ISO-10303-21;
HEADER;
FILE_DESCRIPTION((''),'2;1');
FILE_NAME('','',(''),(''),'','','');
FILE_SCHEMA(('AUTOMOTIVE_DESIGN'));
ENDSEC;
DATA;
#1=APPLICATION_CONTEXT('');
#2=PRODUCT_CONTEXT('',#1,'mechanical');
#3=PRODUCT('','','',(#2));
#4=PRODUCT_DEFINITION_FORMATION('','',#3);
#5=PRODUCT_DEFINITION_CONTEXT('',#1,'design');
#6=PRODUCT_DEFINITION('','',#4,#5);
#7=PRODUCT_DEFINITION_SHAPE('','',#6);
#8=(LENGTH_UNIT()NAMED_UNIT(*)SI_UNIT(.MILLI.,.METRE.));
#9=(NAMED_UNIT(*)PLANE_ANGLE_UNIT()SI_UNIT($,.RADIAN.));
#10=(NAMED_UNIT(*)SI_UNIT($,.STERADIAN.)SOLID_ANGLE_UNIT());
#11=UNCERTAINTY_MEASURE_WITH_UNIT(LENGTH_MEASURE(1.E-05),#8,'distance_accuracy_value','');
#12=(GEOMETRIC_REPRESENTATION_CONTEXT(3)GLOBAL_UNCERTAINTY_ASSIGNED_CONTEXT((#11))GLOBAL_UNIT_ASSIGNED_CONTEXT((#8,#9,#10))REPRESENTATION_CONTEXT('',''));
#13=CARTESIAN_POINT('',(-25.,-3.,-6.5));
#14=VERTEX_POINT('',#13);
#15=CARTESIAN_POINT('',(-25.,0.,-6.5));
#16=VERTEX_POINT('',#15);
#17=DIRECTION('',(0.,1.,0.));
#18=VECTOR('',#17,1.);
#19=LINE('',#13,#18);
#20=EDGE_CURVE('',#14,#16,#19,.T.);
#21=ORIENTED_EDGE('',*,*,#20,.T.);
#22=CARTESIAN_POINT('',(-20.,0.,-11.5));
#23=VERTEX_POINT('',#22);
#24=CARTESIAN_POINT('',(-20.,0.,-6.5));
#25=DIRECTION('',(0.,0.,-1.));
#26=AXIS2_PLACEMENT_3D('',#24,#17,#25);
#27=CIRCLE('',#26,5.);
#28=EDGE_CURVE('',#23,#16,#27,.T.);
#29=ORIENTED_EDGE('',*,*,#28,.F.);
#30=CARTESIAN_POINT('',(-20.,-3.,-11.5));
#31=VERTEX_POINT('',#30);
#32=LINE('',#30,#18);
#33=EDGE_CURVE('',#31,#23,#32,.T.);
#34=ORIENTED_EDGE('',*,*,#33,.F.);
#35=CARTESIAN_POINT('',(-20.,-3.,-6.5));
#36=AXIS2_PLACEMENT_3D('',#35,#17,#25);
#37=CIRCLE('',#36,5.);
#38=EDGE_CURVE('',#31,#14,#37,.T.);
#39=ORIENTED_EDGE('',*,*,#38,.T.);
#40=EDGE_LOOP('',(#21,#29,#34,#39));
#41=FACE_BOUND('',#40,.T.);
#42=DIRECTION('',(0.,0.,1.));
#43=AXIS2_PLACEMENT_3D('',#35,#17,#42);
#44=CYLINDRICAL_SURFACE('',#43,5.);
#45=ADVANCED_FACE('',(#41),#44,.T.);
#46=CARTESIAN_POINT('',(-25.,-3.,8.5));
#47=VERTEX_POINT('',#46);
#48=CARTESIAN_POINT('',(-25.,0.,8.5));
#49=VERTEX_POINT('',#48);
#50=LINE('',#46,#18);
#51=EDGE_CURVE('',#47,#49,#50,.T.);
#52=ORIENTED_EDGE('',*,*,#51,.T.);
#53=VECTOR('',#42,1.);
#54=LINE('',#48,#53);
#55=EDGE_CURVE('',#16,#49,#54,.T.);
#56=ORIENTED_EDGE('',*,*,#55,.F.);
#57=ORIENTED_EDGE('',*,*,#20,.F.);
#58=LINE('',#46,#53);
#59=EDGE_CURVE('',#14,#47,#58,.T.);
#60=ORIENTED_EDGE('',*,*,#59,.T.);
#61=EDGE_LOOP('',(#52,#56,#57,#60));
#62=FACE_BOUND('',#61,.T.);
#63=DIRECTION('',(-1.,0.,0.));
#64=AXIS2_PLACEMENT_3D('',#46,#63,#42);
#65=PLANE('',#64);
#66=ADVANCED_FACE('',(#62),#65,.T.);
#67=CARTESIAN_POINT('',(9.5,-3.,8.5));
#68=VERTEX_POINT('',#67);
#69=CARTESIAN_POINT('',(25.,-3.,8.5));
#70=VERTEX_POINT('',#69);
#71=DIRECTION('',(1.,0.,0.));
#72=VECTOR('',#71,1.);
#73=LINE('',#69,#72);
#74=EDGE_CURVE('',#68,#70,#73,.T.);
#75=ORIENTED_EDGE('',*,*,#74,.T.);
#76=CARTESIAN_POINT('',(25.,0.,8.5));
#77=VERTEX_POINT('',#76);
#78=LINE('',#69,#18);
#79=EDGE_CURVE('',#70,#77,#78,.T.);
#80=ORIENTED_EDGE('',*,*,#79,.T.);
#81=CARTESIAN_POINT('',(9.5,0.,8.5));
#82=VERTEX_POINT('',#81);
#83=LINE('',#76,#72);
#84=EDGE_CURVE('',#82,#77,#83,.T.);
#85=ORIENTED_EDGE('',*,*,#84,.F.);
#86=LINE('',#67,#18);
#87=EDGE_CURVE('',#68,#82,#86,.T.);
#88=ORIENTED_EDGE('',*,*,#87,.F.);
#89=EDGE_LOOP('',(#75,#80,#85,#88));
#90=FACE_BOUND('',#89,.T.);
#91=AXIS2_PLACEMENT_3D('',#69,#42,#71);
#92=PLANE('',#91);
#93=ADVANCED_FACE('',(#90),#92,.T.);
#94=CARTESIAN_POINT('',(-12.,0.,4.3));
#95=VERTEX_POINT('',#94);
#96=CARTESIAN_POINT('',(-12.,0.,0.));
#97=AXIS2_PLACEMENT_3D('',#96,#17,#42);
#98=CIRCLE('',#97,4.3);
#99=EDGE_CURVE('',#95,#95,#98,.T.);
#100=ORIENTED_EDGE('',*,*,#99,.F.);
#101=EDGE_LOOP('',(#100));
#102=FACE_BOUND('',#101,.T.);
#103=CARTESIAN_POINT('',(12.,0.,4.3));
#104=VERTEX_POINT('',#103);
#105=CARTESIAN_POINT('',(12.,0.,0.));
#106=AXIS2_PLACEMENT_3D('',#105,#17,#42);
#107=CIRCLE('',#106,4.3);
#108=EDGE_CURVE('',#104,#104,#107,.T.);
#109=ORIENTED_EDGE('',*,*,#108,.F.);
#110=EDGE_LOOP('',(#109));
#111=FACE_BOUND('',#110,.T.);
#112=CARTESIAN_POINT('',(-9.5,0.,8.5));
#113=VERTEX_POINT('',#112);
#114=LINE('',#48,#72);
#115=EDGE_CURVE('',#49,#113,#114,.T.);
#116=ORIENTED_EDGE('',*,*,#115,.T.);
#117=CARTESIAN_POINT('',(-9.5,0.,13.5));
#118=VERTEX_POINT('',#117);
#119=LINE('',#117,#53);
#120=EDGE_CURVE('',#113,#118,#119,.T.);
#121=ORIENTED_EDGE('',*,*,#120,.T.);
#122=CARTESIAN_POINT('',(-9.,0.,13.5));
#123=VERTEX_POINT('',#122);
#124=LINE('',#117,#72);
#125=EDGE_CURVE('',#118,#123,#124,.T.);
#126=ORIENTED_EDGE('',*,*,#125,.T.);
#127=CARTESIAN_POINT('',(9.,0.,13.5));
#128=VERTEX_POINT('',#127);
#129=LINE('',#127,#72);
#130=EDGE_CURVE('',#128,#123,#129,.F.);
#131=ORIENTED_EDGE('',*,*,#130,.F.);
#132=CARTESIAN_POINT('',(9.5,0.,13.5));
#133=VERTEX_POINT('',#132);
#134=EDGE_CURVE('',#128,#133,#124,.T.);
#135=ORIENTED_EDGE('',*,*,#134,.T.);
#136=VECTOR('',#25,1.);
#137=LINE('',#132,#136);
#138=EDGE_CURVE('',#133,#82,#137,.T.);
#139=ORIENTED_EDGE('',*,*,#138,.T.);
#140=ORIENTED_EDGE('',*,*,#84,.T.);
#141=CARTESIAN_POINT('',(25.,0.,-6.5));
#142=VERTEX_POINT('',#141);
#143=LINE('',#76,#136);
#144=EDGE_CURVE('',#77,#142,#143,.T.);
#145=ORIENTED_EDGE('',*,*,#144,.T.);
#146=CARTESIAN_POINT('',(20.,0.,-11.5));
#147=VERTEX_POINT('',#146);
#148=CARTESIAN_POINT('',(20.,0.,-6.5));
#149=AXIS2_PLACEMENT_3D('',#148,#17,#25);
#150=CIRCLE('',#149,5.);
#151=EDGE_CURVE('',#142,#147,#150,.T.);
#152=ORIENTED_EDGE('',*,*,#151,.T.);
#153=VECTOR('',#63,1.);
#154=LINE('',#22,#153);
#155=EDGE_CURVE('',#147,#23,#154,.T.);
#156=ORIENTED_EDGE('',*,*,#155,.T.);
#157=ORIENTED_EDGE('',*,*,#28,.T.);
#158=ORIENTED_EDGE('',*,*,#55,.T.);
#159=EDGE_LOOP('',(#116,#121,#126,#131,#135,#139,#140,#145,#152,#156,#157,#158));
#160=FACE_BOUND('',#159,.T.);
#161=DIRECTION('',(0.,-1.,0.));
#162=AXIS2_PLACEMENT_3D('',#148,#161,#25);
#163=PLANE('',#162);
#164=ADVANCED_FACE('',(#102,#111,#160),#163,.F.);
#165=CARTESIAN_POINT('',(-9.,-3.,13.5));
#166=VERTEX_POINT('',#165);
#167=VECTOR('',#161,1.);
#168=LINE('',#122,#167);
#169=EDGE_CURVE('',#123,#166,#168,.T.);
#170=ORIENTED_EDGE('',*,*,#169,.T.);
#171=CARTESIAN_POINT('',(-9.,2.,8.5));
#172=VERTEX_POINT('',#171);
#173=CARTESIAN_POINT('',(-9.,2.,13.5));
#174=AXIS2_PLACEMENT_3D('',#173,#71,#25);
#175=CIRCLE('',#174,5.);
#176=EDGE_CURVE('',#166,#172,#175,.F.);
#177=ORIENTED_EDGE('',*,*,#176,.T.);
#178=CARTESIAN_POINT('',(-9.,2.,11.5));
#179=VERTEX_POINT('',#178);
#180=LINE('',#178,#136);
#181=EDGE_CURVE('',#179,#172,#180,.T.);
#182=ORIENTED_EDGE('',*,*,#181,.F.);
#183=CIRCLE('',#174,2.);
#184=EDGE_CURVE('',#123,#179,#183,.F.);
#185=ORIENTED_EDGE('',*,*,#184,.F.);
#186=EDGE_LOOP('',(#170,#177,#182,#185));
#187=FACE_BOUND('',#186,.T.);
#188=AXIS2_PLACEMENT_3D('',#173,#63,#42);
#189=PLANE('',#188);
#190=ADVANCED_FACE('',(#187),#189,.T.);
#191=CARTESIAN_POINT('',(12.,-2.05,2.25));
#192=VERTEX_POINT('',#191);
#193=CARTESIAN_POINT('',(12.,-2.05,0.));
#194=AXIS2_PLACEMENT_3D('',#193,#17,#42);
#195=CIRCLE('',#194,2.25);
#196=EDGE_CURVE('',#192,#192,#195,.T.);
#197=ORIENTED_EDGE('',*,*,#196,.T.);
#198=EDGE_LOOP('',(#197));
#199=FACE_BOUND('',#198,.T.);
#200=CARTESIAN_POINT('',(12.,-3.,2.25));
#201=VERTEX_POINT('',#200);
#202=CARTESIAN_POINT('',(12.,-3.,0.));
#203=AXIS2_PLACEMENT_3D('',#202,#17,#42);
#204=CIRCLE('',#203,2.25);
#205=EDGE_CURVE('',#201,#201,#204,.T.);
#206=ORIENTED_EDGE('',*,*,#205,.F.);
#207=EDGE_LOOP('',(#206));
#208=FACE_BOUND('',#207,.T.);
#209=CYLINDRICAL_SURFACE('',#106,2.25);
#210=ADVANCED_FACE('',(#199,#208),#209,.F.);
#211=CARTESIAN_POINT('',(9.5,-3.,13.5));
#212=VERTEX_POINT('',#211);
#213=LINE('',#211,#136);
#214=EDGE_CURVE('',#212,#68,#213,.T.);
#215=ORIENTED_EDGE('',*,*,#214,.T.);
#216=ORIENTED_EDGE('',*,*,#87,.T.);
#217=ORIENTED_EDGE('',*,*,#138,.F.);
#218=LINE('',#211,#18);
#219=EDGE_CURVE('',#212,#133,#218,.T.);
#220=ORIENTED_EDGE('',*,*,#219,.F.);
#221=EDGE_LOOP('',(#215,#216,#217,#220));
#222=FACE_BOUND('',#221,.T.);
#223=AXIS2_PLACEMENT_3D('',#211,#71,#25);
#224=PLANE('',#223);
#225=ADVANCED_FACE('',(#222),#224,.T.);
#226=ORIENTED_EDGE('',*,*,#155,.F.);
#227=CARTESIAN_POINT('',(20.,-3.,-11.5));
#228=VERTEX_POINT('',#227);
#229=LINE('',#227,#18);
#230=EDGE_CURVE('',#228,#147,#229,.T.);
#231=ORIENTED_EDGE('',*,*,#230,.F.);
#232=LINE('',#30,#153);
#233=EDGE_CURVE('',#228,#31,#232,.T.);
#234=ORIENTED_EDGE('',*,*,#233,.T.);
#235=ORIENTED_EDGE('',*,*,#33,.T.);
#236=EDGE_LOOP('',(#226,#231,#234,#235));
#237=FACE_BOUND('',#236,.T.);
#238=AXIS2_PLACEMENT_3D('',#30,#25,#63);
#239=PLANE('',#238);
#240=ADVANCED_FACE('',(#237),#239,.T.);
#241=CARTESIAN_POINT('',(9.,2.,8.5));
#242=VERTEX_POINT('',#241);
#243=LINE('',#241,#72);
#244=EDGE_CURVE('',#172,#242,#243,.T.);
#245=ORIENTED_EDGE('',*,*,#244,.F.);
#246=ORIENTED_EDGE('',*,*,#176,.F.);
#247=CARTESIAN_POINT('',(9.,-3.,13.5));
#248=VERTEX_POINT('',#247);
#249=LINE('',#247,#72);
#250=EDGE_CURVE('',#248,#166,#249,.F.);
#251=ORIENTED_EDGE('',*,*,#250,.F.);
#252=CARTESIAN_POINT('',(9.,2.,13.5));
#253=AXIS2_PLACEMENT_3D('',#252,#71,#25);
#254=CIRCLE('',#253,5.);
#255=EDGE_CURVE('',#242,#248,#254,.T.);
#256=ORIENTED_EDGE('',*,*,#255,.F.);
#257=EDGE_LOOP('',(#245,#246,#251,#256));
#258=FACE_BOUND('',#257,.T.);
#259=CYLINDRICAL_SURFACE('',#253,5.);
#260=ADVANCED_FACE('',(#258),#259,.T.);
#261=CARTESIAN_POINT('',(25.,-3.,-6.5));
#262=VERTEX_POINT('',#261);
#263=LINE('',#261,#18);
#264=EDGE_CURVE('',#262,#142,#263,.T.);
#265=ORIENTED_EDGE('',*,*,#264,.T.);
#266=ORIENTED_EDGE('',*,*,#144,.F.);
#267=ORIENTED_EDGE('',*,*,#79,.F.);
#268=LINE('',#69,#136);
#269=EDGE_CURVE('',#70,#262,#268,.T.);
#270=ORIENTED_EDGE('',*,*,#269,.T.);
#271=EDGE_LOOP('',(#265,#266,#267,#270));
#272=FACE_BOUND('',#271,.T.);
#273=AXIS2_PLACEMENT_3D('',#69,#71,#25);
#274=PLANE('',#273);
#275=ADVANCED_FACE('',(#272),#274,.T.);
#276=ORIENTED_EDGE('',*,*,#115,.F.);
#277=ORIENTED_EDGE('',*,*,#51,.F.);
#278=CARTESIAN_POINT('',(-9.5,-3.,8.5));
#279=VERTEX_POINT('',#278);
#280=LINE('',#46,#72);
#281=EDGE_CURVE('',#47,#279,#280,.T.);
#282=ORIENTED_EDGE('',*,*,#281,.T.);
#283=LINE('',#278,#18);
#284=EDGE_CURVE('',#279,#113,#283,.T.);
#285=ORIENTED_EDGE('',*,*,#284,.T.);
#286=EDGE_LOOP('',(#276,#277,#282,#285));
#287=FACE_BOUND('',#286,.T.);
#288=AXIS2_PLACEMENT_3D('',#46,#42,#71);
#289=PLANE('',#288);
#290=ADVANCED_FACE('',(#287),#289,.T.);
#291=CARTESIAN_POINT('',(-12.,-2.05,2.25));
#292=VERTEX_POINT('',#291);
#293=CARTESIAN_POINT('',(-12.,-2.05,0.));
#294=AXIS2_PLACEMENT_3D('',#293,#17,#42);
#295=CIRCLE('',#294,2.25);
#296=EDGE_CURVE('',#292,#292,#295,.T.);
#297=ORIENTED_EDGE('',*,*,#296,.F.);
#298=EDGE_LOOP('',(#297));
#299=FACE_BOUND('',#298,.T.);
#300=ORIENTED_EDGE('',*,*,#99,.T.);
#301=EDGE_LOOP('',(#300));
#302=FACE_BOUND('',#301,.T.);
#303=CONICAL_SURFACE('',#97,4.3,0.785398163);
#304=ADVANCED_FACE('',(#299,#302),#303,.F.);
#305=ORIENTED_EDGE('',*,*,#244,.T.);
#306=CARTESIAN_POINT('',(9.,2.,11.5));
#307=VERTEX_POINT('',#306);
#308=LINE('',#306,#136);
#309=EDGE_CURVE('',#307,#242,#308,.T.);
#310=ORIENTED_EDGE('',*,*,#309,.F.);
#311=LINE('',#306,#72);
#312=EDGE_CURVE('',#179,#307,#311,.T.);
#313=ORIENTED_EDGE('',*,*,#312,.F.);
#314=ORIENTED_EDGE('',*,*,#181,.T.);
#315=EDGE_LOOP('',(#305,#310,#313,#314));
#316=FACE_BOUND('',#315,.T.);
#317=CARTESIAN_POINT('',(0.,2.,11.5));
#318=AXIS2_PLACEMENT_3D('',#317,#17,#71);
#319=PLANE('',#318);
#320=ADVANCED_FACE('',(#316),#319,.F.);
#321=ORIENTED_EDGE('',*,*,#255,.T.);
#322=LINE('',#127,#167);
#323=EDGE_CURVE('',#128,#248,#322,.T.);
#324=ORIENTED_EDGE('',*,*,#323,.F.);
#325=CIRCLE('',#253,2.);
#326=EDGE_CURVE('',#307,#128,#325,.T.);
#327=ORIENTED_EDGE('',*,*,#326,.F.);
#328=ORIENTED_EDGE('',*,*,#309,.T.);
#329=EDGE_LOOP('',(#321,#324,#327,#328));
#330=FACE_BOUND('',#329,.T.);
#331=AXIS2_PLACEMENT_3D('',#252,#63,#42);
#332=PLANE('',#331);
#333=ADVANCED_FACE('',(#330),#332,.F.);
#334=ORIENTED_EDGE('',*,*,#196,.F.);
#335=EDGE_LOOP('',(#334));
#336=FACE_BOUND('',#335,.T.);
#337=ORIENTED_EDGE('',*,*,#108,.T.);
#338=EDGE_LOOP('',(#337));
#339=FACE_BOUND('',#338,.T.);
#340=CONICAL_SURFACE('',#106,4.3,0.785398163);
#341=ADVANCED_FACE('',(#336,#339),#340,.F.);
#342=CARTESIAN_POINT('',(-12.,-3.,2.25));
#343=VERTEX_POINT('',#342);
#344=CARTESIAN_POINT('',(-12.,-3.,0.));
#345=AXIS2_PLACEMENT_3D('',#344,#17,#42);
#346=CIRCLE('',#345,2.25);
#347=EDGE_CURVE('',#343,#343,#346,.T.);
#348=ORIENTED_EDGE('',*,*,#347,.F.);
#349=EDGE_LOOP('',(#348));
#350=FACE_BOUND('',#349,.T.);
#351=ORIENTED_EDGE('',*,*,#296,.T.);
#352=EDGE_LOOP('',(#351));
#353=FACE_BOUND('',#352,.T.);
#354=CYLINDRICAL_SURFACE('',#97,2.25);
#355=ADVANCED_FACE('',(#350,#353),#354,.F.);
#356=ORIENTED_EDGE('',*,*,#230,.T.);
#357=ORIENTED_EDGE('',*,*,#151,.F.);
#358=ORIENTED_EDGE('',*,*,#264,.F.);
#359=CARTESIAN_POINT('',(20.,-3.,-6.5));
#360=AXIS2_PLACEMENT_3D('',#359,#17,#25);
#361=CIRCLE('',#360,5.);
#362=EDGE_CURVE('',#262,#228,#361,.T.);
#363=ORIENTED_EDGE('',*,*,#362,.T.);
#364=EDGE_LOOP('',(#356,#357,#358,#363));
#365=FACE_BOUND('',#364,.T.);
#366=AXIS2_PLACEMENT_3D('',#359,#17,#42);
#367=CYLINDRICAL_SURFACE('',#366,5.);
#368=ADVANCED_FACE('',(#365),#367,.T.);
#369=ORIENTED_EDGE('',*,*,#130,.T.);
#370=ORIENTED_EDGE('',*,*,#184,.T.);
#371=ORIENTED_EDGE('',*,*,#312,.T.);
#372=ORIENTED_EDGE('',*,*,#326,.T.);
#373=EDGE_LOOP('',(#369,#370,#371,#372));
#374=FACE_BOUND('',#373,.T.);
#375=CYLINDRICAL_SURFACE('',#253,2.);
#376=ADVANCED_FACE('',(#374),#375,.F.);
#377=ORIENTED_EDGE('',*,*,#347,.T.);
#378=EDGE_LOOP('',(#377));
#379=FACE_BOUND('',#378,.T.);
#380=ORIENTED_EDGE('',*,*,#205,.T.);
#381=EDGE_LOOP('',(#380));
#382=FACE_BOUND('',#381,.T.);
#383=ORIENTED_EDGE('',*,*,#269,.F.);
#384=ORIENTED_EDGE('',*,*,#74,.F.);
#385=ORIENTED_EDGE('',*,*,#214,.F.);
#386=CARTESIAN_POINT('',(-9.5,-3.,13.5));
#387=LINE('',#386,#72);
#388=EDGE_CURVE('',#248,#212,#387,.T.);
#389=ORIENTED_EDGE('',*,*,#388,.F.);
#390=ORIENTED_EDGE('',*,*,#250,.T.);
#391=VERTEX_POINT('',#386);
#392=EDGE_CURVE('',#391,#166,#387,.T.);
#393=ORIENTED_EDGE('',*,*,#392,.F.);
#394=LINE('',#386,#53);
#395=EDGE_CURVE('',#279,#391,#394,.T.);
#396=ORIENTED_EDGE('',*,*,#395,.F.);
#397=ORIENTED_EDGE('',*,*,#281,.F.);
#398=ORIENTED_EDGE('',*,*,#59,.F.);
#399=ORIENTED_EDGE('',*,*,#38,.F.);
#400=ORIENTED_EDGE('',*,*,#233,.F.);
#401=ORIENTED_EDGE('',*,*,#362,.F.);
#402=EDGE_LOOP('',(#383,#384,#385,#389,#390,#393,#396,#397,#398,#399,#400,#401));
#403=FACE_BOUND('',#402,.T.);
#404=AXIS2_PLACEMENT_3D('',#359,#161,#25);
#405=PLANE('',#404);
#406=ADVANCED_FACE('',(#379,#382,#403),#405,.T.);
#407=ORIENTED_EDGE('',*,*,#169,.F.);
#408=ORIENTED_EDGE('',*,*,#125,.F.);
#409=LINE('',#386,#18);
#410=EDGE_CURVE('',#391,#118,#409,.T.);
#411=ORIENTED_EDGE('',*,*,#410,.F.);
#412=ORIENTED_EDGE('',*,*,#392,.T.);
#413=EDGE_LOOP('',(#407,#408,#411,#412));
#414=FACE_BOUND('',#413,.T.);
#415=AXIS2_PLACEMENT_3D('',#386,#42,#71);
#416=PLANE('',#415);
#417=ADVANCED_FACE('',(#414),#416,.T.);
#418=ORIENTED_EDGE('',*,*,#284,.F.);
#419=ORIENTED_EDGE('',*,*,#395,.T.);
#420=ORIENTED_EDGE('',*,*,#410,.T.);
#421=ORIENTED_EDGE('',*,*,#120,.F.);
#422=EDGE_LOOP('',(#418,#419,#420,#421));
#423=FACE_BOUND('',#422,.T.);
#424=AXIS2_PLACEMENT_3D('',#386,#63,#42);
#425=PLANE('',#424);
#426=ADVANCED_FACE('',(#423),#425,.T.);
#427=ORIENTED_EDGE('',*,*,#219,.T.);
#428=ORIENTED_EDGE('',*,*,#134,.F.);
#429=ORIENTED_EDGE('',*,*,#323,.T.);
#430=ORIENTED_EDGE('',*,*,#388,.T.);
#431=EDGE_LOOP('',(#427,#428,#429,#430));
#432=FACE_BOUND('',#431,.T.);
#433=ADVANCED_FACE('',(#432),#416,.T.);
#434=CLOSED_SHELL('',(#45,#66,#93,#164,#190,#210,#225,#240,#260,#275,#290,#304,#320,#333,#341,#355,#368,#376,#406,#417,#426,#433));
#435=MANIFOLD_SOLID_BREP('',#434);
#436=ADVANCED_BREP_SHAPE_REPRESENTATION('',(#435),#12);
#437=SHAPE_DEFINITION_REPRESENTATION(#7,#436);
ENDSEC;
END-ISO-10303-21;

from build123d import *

# Parameters (mm, degrees)
SM_BASE_FLANGE_1_DEPTH   = 3
OTHER_START              = -9
OTHER_1_DEPTH            = 18
HOLE_WIZARD_2_AT_2_COUNT = 2
HOLE_WIZARD_2_AT_2_PITCH = 24


# Read off the part's stored shape, not the designer's step: 褶边1
# Sheet-metal steps are written as plain solids
with BuildPart() as part:
    # Sketch 1 → 基体-法兰1 (new body)
    with BuildSketch(Plane(origin=(0, 0, 0), x_dir=(1, 0, 0), z_dir=(0, 1, 0))):
        with BuildLine():
            Line((-9.5, -13.5), (9.5, -13.5))
            Line((9.5, -13.5), (9.5, -8.5))
            Line((9.5, -8.5), (25, -8.5))
            Line((25, -8.5), (25, 6.5))
            ThreePointArc((25, 6.5), (23.535533906, 10.035533906), (20, 11.5))
            Line((20, 11.5), (-20, 11.5))
            ThreePointArc((-20, 11.5), (-23.535533906, 10.035533906), (-25, 6.5))
            Line((-25, 6.5), (-25, -8.5))
            Line((-25, -8.5), (-9.5, -8.5))
            Line((-9.5, -8.5), (-9.5, -13.5))
        make_face()
    extrude(amount=-SM_BASE_FLANGE_1_DEPTH)

    # Other 1 outline → Other 1 (add)
    with BuildSketch(Plane.YZ.offset(OTHER_START)):
        with BuildLine():
            Line((2, 11.5), (2, 8.5))
            ThreePointArc((2, 8.5), (5.535533906, 17.035533906), (-3, 13.5))
            Line((-3, 13.5), (0, 13.5))
            ThreePointArc((0, 13.5), (3.414213562, 14.914213562), (2, 11.5))
        make_face()
    extrude(amount=OTHER_1_DEPTH)

    # 草图13 → 打孔尺寸(%根据十字)槽半沉头木螺钉的类型2 (revolve, cut)
    with BuildSketch(Plane(origin=(-12, 0, 0), x_dir=(0, 0, 1), z_dir=(1, 0, 0))):
        Polygon((0, 0), (0, 3), (2.25, 3), (2.25, 2.05), (4.3, 0), align=None)
    hole_wizard_2 = revolve(axis=Axis((-12, 6.35, 0), (0, -1, 0)), mode=Mode.SUBTRACT)

    # 打孔尺寸(%根据十字)槽半沉头木螺钉的类型2 at 2: 打孔尺寸(%根据十字)槽半沉头木螺钉的类型2 ×2
    with Locations(*[(i * HOLE_WIZARD_2_AT_2_PITCH, 0, 0) for i in range(1, HOLE_WIZARD_2_AT_2_COUNT)]):
        add(hole_wizard_2, mode=Mode.SUBTRACT)


solid = part.part
